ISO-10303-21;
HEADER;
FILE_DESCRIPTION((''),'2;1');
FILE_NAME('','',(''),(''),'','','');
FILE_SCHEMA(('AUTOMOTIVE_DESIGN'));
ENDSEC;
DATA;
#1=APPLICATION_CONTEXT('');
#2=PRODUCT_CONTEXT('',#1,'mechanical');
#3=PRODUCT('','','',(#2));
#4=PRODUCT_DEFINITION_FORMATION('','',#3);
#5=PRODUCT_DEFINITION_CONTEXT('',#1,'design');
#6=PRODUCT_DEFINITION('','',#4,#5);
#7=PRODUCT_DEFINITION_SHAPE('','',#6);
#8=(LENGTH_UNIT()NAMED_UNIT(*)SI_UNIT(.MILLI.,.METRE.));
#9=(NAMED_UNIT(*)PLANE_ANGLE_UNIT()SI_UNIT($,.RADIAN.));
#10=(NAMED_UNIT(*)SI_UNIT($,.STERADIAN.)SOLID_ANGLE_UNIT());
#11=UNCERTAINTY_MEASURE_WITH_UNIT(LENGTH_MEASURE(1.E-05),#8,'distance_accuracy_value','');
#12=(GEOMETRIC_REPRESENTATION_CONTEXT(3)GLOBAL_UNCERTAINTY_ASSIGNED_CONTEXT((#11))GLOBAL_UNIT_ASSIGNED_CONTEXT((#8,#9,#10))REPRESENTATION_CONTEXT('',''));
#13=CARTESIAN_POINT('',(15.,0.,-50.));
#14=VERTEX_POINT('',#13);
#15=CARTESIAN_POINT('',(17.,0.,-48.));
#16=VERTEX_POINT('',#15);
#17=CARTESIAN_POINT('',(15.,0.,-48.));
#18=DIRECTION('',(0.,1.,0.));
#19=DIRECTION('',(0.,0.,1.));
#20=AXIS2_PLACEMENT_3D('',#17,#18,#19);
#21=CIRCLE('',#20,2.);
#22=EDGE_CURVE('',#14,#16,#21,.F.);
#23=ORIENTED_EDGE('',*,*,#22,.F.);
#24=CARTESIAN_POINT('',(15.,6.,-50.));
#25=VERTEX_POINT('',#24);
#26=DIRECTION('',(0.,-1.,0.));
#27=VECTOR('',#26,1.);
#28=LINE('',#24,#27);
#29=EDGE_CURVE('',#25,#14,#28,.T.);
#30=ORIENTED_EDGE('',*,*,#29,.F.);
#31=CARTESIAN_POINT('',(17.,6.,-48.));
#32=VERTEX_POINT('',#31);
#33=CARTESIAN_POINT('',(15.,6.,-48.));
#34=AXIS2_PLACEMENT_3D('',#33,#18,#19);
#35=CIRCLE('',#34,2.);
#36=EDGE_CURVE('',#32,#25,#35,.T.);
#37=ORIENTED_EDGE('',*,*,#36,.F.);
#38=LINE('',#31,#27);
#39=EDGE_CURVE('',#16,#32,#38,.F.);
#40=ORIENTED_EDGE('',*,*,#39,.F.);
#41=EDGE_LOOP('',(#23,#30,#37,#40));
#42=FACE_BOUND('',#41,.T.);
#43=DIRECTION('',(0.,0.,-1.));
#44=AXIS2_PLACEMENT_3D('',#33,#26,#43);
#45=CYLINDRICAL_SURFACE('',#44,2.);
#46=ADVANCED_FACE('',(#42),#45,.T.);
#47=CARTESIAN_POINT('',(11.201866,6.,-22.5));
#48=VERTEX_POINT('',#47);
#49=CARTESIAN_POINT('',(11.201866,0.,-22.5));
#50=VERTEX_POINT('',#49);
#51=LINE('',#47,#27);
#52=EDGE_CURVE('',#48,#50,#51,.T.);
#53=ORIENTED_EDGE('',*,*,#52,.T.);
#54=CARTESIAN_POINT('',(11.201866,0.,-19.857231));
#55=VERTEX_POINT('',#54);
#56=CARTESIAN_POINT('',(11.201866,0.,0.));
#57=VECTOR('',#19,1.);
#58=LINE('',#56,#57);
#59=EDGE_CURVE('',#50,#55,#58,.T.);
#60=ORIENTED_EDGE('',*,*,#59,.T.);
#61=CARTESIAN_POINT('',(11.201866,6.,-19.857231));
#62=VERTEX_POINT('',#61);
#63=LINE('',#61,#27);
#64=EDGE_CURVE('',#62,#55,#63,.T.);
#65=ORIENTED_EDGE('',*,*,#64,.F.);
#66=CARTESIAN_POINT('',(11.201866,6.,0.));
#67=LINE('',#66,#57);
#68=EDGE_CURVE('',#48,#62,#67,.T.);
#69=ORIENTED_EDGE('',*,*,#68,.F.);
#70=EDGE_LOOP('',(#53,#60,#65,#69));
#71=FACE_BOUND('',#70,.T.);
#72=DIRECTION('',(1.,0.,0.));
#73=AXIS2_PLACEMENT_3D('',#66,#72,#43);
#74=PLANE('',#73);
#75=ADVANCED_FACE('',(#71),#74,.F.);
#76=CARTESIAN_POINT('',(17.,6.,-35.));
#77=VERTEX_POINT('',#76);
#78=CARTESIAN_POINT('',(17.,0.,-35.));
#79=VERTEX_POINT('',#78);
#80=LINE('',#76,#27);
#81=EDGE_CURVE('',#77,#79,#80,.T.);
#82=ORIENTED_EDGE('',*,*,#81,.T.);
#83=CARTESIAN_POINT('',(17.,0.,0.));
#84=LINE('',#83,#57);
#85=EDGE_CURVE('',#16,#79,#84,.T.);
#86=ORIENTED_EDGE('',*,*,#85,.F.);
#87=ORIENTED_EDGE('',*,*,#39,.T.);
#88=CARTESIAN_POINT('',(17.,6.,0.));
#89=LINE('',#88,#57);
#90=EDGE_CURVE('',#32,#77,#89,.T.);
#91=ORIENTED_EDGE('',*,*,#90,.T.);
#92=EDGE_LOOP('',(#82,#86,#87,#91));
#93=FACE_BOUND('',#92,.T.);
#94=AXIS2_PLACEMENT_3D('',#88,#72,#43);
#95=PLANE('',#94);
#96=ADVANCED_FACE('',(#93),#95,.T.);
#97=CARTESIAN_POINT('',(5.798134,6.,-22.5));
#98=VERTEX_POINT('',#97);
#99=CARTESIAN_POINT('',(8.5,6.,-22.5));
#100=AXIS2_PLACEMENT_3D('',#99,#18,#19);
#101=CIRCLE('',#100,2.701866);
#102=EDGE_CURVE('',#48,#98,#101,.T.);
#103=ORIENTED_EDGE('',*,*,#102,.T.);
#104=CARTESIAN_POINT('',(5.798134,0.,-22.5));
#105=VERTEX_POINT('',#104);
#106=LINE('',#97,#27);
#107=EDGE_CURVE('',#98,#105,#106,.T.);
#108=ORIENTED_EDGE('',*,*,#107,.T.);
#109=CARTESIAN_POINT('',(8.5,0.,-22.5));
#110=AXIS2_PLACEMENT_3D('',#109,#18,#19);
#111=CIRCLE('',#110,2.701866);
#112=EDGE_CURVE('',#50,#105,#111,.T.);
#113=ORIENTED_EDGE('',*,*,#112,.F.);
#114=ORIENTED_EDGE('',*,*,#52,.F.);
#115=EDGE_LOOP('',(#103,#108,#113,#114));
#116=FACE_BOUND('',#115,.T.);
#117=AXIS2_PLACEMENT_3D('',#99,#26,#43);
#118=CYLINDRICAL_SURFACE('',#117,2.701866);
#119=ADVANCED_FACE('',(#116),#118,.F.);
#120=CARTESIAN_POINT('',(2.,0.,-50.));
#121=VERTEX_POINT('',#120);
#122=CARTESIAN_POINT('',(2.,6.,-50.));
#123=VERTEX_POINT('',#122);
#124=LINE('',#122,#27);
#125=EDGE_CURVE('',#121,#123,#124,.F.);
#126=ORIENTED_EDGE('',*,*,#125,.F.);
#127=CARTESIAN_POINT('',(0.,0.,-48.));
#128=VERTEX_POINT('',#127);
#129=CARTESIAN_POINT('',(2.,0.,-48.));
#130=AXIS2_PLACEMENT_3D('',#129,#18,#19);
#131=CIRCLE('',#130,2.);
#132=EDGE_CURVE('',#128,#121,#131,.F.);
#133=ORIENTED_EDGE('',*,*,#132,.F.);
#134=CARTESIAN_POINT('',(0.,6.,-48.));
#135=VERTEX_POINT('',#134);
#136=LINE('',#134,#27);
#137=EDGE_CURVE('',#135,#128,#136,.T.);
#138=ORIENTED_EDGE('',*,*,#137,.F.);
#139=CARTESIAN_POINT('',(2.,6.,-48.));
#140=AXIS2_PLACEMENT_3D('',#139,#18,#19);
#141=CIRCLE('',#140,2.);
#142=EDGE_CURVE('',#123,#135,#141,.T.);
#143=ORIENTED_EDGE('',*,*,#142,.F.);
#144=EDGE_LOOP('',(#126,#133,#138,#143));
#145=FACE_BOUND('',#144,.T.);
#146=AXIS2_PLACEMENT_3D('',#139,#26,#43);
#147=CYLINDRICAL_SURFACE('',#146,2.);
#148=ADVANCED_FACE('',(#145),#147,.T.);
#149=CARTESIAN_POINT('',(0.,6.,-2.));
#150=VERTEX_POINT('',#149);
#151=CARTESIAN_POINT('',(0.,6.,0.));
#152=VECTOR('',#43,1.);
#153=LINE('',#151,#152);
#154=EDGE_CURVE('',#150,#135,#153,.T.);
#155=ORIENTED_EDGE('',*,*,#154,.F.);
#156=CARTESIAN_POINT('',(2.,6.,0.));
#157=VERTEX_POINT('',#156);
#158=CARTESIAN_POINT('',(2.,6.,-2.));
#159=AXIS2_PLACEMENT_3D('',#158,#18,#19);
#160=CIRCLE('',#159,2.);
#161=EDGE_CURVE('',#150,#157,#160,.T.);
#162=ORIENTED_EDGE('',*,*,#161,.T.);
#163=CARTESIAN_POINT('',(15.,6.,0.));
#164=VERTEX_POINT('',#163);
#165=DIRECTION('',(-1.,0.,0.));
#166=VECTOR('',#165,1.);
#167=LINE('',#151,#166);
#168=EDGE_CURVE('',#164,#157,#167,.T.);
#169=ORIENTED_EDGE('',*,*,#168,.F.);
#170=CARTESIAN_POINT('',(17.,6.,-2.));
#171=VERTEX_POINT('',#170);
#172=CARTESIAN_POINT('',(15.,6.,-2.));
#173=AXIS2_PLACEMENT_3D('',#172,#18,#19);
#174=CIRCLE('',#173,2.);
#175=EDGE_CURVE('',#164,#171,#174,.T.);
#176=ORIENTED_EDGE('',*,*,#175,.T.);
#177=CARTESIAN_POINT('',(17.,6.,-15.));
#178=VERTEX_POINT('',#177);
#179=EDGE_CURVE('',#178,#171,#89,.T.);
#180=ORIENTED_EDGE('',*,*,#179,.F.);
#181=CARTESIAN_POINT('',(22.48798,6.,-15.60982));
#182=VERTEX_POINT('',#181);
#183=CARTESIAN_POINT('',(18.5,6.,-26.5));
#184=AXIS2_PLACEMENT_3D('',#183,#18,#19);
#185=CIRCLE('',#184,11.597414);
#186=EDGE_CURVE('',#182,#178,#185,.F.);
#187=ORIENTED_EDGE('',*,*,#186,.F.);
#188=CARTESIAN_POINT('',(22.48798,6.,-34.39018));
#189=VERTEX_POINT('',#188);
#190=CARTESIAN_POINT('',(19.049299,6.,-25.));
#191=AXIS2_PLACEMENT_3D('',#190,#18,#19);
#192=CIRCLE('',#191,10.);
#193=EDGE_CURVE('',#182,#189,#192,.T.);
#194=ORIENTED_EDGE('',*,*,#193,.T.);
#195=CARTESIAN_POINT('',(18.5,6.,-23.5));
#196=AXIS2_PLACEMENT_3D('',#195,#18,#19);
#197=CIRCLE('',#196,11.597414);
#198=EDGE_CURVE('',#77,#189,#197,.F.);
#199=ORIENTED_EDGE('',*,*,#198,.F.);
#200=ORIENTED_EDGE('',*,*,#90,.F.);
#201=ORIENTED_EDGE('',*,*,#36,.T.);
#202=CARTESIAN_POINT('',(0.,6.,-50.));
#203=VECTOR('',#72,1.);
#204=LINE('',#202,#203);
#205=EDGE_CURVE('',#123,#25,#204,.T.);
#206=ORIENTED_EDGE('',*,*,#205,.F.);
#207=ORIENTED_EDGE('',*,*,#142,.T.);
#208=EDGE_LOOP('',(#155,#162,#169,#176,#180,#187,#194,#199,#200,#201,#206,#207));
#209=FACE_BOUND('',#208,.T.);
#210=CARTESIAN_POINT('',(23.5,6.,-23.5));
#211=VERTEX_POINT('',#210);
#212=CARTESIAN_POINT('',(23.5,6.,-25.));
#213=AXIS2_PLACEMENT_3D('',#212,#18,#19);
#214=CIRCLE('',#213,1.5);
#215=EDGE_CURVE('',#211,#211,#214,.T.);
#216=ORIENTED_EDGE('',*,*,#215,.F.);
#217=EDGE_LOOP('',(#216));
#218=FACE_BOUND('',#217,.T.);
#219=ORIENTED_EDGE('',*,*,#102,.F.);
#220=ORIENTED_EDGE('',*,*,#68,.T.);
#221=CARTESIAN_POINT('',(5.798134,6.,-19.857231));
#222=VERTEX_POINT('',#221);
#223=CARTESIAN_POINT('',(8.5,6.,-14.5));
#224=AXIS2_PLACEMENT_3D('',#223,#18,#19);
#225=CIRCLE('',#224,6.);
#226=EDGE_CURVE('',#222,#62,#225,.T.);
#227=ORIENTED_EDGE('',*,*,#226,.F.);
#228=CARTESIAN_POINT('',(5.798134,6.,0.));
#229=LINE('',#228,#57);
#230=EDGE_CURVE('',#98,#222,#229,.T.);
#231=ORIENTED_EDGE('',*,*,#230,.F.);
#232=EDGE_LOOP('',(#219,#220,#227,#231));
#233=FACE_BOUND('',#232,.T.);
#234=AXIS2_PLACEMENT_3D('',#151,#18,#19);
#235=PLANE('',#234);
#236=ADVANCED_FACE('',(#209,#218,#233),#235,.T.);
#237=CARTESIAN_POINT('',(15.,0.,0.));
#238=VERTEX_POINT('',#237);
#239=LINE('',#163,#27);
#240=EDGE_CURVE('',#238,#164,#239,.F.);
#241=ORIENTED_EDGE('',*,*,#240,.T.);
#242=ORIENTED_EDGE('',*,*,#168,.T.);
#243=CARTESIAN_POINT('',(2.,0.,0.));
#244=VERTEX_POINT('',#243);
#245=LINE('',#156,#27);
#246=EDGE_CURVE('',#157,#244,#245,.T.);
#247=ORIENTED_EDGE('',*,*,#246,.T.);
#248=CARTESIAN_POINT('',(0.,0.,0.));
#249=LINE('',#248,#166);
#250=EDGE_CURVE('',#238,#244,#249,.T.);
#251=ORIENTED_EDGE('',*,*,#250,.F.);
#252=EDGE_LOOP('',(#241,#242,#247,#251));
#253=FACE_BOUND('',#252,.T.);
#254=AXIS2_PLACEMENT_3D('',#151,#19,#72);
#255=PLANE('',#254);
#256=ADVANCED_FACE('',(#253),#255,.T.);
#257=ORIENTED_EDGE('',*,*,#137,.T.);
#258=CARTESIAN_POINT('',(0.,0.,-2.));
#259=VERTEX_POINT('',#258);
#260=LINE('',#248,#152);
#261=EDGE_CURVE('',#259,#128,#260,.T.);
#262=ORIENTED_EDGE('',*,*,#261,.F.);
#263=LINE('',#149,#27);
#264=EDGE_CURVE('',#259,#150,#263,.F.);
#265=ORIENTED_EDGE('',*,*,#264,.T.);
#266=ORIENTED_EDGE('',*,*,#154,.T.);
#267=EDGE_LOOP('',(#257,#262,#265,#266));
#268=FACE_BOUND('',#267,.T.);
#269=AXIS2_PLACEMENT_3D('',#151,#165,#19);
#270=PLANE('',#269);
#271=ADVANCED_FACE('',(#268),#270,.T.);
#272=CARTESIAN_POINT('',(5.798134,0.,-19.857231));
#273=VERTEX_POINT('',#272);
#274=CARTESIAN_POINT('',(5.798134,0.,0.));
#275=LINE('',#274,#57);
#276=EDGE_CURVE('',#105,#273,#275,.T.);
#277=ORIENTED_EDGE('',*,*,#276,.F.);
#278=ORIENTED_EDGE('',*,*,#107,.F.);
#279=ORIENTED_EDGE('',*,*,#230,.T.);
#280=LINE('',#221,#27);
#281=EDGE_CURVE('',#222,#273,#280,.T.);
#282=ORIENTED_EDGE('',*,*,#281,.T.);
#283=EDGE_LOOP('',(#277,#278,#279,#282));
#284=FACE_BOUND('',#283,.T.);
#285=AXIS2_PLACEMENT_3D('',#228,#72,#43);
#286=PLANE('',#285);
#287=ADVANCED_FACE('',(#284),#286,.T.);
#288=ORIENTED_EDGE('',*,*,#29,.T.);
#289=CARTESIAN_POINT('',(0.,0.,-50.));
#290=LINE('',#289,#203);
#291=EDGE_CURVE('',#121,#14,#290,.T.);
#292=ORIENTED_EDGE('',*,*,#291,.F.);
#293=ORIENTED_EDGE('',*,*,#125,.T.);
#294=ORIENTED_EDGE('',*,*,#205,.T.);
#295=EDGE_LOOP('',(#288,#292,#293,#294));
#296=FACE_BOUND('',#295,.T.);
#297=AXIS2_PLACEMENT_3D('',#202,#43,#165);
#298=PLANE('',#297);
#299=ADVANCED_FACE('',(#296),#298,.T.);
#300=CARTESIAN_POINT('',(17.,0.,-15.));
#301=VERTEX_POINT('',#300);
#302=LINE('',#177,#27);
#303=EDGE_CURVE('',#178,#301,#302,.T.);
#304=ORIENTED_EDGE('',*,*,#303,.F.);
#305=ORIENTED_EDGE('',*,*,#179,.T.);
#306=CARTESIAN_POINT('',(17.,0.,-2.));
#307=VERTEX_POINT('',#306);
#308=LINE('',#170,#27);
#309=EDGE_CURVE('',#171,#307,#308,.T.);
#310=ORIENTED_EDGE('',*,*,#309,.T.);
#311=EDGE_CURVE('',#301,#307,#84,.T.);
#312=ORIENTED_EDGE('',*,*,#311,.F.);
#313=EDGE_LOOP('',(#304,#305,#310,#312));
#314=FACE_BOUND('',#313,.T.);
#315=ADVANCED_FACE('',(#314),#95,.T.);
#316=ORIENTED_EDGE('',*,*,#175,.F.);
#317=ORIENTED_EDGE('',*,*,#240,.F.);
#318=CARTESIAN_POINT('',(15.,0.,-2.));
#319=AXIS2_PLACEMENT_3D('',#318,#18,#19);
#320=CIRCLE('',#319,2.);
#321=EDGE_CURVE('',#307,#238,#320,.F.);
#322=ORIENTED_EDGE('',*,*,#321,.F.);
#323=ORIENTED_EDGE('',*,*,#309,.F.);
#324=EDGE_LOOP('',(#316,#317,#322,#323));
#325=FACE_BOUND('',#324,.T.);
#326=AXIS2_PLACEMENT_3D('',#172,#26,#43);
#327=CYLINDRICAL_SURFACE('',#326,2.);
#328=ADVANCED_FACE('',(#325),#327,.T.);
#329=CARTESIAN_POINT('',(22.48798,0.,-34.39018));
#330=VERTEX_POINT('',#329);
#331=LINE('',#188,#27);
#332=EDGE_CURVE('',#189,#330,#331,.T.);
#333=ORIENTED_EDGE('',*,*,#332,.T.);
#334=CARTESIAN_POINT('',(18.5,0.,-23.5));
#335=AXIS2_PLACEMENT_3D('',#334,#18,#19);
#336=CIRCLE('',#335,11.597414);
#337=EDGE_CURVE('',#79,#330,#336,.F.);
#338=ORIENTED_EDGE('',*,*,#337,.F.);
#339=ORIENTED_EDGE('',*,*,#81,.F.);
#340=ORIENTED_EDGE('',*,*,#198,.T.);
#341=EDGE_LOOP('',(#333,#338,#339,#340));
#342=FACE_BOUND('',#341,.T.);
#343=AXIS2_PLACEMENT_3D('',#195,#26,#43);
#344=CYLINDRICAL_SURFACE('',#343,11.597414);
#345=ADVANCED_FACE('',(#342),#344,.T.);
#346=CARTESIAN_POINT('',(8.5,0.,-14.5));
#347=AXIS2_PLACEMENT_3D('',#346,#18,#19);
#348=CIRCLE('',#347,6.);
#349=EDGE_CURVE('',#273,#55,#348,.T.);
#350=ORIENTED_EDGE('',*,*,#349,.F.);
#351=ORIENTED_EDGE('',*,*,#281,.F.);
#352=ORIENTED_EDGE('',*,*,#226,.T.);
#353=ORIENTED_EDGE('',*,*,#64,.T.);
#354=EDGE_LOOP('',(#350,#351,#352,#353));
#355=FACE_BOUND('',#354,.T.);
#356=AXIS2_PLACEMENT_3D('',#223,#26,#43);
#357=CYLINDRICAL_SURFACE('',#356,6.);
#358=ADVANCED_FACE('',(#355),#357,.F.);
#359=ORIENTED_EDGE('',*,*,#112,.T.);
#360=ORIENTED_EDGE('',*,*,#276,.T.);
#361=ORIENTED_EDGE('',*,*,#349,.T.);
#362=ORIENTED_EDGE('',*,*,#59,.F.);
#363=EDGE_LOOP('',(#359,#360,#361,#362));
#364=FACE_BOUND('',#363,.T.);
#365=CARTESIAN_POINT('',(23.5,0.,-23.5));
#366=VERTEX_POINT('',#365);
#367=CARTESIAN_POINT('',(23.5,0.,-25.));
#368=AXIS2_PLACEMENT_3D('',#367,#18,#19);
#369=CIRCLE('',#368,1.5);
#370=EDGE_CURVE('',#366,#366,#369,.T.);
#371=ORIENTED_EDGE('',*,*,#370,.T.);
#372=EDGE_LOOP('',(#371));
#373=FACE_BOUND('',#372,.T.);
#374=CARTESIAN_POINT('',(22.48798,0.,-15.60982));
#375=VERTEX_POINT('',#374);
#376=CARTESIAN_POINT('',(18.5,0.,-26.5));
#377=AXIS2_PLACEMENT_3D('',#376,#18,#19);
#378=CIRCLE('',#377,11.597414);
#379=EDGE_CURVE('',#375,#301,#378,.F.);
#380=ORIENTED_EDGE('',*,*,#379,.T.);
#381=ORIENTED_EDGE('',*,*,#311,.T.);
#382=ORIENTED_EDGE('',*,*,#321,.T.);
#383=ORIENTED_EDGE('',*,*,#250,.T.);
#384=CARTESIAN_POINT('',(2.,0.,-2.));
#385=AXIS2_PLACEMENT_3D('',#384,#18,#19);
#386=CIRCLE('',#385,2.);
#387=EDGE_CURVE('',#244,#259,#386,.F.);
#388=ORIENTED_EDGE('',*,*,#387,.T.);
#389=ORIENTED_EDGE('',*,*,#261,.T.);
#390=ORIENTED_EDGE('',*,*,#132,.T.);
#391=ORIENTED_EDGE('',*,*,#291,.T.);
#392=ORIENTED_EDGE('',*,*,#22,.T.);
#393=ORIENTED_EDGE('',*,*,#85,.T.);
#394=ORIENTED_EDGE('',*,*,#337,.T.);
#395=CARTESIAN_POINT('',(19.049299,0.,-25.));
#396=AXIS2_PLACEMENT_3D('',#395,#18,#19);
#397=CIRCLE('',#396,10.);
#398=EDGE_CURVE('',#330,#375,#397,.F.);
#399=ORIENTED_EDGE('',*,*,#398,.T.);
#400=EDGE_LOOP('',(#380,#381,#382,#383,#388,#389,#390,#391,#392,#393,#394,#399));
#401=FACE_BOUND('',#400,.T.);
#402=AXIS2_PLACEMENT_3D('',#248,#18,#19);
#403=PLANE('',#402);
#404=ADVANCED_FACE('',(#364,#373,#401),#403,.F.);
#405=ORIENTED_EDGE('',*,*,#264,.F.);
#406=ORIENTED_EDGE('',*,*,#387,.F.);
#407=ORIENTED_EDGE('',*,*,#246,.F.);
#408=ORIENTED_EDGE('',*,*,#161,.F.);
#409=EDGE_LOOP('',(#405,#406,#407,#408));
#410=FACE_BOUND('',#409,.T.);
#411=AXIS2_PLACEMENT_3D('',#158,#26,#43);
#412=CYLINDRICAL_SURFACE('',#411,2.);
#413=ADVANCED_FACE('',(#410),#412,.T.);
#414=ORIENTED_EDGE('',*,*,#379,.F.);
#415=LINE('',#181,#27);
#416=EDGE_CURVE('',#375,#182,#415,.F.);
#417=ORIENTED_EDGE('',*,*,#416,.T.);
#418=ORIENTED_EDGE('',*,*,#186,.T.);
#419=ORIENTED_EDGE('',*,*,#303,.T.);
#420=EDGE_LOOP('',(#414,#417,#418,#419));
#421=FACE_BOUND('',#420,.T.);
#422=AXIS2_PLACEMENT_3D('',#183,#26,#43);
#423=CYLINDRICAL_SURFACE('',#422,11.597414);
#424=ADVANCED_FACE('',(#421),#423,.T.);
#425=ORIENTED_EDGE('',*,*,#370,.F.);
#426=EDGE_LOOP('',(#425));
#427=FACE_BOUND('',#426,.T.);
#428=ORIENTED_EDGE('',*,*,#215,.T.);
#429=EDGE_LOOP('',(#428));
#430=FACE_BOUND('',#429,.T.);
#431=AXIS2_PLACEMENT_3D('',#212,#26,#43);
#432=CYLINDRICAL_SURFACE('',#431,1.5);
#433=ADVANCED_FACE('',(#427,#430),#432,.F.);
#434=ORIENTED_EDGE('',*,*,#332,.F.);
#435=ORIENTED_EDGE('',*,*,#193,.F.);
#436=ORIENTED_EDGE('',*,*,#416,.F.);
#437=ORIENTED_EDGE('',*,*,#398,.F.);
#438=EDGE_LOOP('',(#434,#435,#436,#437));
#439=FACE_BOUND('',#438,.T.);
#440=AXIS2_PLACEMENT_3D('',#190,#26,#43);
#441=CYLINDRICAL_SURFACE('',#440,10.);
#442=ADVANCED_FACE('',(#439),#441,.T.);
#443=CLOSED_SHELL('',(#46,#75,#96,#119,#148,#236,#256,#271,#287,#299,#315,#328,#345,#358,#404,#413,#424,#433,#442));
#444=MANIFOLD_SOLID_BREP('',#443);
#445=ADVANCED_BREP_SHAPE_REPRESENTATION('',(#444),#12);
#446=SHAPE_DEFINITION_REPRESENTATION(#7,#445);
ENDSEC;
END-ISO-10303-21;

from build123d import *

# Parameters (mm, degrees)
ESQUISSE1_R        = 1.5
BOSS_EXTRU_2_DEPTH = 6
CONG_2_R           = 2
CONG_3_R           = 10


with BuildPart() as part:
    # Esquisse1 → Boss.-Extru.2 (new body)
    with BuildSketch(Plane(origin=(0, 0, 0), x_dir=(1, 0, 0), z_dir=(0, 1, 0))):
        with BuildLine():
            Line((0, 0), (17, 0))
            Line((17, 0), (17, 15))
            ThreePointArc((17, 15), (25.571067812, 17.307611845), (30, 25))
            ThreePointArc((30, 25), (25.571067812, 32.692388155), (17, 35))
            Line((17, 35), (17, 50))
            Line((17, 50), (0, 50))
            Line((0, 50), (0, 0))
        make_face()
        with BuildLine():
            ThreePointArc((5.798134367, 22.5), (8.5, 25.201865633), (11.201865633, 22.5))
            Line((11.201865633, 22.5), (11.201865633, 19.857230824))
            ThreePointArc((11.201865633, 19.857230824), (8.5, 8.5), (5.798134367, 19.857230824))
            Line((5.798134367, 19.857230824), (5.798134367, 22.5))
        make_face(mode=Mode.SUBTRACT)
        with Locations(Location((23.5, 25, 0), (0, 0, 270))):
            Circle(ESQUISSE1_R, mode=Mode.SUBTRACT)
    extrude(amount=BOSS_EXTRU_2_DEPTH)

    # Congé2
    cong_2_edges = [part.edges().sort_by_distance(p)[0] for p in [
        (17, 3, 0),
        (0, 3, 0),
        (0, 3, -50),
        (17, 3, -50),
    ]]
    fillet(cong_2_edges, radius=CONG_2_R)

    # Congé3
    # the kernel refuses this fillet: 10 mm, written as the material it takes off along each edge
    with BuildSketch(Plane(origin=(30, -30.063050545, -25), x_dir=(-0.6246887700874293, 0, 0.7808738313752451), z_dir=(0, 1, 0))) as cong_3_piece_1:
        with BuildLine():
            CenterArc((6.840779647, -8.551115481), CONG_3_R, 58.772060321, 139.774574658)
            ThreePointArc((-2.639871114, -11.731879721), (-2.959277225, -5.497060293), (0, 0))
            ThreePointArc((0, 0), (6.012610109, 1.680331289), (12.025220218, 0))
        make_face()
    extrude(amount=66.126101089, mode=Mode.SUBTRACT)


solid = part.part
